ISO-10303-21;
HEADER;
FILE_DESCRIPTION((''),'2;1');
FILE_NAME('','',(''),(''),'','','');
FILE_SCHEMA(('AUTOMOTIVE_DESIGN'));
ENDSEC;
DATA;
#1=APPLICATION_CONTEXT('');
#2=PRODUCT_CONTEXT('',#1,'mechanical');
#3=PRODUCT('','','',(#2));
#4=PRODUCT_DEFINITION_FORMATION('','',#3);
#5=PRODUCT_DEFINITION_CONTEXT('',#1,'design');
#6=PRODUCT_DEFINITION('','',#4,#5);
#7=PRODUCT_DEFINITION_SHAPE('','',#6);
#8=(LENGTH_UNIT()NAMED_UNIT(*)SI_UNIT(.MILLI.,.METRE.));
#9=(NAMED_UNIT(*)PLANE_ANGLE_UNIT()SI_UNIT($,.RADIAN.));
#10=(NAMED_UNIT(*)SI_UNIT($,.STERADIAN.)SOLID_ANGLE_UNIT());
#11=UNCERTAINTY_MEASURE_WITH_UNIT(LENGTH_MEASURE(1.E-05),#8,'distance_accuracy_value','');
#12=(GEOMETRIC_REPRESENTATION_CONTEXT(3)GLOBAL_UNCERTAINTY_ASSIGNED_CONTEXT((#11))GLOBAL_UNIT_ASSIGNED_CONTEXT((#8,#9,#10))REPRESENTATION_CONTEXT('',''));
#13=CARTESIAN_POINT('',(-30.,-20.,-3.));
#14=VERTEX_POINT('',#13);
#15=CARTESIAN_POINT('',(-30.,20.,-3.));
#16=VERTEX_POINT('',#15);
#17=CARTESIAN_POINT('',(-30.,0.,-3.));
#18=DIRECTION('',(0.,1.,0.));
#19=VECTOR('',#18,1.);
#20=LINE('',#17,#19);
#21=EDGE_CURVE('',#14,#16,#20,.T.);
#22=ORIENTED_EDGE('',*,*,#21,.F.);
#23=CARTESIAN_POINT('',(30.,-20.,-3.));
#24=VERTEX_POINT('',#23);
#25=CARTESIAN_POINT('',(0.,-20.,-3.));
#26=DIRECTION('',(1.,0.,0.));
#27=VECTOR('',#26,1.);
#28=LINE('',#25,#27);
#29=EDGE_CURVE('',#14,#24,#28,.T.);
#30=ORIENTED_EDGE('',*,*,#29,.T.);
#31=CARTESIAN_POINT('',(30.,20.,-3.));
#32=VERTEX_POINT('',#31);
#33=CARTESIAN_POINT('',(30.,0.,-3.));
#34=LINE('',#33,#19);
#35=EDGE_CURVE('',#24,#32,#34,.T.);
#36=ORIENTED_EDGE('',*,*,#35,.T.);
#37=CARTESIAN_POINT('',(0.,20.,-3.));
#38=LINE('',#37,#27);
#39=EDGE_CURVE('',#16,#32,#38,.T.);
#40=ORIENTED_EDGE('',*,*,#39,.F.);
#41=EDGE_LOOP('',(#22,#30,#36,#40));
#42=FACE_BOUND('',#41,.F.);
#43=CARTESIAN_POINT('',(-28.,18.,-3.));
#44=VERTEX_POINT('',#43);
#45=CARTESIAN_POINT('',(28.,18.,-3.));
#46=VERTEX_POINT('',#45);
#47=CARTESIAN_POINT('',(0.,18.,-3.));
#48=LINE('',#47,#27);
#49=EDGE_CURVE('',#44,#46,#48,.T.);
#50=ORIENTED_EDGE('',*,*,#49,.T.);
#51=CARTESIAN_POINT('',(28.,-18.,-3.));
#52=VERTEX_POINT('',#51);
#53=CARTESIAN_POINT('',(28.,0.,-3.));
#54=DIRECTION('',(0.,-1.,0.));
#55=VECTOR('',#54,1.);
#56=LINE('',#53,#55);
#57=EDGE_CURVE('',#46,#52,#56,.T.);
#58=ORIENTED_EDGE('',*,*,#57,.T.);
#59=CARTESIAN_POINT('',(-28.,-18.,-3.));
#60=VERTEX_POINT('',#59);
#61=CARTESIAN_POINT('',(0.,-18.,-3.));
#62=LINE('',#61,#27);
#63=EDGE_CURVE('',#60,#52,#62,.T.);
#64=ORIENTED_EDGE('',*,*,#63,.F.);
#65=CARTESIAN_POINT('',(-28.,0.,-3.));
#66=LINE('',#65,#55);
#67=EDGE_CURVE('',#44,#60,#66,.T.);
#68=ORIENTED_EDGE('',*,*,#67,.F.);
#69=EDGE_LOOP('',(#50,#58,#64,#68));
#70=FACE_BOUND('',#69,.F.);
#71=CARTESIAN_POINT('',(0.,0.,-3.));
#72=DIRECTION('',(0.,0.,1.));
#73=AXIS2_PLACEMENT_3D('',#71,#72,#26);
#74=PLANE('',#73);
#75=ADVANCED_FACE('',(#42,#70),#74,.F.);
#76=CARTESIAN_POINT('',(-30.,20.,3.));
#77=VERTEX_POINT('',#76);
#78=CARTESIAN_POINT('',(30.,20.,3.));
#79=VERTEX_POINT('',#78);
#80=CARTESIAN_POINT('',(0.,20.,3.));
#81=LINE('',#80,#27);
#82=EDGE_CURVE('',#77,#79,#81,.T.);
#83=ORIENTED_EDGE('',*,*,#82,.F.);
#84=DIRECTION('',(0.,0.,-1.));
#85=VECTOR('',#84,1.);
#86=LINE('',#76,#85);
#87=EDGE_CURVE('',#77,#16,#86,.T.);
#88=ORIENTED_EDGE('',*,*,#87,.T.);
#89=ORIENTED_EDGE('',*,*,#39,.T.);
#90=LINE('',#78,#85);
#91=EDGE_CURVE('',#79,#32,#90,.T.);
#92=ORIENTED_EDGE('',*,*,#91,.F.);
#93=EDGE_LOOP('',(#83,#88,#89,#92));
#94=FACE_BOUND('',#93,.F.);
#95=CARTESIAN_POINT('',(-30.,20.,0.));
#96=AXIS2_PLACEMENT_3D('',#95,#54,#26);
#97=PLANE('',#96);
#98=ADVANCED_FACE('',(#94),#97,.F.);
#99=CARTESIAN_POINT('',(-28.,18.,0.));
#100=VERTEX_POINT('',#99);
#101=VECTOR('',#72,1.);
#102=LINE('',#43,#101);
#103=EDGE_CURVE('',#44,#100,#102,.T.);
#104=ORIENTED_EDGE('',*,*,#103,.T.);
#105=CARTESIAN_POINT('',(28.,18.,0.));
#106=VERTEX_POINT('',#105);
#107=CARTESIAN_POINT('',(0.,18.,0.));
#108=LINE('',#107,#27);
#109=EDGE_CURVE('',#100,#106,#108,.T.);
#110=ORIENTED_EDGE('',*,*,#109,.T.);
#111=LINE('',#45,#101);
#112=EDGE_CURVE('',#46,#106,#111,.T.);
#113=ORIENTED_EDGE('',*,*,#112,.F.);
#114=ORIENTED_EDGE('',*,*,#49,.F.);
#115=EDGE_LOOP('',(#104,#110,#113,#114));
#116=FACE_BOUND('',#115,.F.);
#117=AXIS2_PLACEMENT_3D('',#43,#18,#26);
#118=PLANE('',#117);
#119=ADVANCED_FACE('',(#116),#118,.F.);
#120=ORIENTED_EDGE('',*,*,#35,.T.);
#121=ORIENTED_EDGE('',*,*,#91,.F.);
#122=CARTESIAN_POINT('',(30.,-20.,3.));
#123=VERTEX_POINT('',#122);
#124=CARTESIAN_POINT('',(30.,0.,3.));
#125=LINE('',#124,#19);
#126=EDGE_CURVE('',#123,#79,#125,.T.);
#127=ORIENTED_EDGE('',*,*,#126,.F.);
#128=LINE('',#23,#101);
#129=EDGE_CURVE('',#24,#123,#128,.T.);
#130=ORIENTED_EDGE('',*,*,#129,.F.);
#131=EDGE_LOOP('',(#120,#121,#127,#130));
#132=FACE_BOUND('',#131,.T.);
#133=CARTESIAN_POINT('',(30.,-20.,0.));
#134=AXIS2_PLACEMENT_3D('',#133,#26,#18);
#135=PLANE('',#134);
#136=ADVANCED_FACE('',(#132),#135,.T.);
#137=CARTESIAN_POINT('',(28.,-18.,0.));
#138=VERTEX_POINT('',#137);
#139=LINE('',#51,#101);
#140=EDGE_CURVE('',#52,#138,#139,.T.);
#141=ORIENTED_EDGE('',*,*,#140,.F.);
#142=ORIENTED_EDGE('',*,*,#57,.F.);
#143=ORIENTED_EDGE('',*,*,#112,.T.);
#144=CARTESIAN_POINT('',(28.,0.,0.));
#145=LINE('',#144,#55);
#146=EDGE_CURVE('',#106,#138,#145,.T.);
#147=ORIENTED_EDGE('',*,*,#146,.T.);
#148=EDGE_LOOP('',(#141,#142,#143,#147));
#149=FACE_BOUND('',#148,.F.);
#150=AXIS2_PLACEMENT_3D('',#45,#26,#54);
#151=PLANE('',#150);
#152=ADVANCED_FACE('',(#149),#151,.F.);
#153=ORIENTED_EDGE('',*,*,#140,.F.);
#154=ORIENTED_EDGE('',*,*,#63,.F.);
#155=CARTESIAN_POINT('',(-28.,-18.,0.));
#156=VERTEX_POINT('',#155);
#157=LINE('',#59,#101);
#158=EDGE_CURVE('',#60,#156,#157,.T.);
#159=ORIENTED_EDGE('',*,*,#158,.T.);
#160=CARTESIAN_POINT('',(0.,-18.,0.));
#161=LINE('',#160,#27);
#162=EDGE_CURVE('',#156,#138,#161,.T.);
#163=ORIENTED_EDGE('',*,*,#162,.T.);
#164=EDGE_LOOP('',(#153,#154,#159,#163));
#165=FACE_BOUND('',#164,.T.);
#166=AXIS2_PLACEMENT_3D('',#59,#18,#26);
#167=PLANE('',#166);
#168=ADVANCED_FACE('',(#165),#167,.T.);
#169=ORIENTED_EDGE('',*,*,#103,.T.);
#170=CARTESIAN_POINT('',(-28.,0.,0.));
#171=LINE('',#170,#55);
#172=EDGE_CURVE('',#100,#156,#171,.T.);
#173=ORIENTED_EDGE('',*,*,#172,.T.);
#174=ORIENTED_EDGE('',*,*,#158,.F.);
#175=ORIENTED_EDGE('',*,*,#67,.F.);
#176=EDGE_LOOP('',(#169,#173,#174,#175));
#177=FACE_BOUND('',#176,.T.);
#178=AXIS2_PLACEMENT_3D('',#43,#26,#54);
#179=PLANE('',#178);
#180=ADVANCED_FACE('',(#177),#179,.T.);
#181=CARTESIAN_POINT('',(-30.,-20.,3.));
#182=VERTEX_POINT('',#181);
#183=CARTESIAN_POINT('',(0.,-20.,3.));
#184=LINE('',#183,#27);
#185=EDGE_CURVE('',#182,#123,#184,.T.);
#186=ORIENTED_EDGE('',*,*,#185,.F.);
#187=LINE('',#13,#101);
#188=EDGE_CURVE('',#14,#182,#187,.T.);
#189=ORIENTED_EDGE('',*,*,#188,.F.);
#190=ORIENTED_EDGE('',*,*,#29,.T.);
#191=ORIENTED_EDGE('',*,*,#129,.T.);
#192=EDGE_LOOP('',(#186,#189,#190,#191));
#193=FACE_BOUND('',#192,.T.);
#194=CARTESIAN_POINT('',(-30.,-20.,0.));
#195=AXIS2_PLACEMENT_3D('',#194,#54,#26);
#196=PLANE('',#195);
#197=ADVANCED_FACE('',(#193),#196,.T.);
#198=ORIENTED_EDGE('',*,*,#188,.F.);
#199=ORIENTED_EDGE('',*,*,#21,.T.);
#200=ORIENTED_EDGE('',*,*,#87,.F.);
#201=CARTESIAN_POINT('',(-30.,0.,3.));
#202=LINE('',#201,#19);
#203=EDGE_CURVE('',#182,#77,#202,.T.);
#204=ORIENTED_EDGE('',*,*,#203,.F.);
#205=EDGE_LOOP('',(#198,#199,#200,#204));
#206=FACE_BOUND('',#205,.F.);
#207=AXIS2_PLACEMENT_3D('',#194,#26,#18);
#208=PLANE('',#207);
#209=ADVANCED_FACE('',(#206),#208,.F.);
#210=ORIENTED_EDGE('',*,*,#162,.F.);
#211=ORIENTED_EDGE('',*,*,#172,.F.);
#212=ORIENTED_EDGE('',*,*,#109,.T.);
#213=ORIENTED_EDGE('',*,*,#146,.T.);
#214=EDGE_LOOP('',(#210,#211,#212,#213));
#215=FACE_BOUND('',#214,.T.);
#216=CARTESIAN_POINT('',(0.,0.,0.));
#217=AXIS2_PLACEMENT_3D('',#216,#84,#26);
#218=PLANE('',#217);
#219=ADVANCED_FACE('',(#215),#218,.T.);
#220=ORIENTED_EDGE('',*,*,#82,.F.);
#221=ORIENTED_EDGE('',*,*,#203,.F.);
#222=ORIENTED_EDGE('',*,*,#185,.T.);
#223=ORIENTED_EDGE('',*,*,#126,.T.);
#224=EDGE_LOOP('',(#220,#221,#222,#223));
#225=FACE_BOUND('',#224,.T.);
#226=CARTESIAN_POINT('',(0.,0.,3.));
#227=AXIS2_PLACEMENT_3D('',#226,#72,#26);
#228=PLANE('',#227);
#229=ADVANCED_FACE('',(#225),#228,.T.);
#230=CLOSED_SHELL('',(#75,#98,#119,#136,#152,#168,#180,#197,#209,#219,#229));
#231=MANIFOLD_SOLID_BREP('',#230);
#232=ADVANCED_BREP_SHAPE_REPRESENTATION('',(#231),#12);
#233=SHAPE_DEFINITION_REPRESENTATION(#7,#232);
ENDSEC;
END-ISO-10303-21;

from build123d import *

# Parameters (mm, degrees)
F0_W     = 60
F0_H     = 40
F1_DEPTH = 3
F2_W     = 56
F2_H     = 36
F3_DEPTH = 3


with BuildPart() as f1:
    # F0 (on Top) → F1 (new body, symmetric)
    with BuildSketch(Plane.XY):
        Rectangle(F0_W, F0_H)
    extrude(amount=F1_DEPTH, both=True)

    # F2 (on face) → F3 (cut)
    with BuildSketch(Plane(origin=(0, 0, -3), x_dir=(1, 0, 0), z_dir=(0, 0, -1))):
        Rectangle(F2_W, F2_H)
    extrude(amount=-F3_DEPTH, mode=Mode.SUBTRACT)


solid = f1.part
